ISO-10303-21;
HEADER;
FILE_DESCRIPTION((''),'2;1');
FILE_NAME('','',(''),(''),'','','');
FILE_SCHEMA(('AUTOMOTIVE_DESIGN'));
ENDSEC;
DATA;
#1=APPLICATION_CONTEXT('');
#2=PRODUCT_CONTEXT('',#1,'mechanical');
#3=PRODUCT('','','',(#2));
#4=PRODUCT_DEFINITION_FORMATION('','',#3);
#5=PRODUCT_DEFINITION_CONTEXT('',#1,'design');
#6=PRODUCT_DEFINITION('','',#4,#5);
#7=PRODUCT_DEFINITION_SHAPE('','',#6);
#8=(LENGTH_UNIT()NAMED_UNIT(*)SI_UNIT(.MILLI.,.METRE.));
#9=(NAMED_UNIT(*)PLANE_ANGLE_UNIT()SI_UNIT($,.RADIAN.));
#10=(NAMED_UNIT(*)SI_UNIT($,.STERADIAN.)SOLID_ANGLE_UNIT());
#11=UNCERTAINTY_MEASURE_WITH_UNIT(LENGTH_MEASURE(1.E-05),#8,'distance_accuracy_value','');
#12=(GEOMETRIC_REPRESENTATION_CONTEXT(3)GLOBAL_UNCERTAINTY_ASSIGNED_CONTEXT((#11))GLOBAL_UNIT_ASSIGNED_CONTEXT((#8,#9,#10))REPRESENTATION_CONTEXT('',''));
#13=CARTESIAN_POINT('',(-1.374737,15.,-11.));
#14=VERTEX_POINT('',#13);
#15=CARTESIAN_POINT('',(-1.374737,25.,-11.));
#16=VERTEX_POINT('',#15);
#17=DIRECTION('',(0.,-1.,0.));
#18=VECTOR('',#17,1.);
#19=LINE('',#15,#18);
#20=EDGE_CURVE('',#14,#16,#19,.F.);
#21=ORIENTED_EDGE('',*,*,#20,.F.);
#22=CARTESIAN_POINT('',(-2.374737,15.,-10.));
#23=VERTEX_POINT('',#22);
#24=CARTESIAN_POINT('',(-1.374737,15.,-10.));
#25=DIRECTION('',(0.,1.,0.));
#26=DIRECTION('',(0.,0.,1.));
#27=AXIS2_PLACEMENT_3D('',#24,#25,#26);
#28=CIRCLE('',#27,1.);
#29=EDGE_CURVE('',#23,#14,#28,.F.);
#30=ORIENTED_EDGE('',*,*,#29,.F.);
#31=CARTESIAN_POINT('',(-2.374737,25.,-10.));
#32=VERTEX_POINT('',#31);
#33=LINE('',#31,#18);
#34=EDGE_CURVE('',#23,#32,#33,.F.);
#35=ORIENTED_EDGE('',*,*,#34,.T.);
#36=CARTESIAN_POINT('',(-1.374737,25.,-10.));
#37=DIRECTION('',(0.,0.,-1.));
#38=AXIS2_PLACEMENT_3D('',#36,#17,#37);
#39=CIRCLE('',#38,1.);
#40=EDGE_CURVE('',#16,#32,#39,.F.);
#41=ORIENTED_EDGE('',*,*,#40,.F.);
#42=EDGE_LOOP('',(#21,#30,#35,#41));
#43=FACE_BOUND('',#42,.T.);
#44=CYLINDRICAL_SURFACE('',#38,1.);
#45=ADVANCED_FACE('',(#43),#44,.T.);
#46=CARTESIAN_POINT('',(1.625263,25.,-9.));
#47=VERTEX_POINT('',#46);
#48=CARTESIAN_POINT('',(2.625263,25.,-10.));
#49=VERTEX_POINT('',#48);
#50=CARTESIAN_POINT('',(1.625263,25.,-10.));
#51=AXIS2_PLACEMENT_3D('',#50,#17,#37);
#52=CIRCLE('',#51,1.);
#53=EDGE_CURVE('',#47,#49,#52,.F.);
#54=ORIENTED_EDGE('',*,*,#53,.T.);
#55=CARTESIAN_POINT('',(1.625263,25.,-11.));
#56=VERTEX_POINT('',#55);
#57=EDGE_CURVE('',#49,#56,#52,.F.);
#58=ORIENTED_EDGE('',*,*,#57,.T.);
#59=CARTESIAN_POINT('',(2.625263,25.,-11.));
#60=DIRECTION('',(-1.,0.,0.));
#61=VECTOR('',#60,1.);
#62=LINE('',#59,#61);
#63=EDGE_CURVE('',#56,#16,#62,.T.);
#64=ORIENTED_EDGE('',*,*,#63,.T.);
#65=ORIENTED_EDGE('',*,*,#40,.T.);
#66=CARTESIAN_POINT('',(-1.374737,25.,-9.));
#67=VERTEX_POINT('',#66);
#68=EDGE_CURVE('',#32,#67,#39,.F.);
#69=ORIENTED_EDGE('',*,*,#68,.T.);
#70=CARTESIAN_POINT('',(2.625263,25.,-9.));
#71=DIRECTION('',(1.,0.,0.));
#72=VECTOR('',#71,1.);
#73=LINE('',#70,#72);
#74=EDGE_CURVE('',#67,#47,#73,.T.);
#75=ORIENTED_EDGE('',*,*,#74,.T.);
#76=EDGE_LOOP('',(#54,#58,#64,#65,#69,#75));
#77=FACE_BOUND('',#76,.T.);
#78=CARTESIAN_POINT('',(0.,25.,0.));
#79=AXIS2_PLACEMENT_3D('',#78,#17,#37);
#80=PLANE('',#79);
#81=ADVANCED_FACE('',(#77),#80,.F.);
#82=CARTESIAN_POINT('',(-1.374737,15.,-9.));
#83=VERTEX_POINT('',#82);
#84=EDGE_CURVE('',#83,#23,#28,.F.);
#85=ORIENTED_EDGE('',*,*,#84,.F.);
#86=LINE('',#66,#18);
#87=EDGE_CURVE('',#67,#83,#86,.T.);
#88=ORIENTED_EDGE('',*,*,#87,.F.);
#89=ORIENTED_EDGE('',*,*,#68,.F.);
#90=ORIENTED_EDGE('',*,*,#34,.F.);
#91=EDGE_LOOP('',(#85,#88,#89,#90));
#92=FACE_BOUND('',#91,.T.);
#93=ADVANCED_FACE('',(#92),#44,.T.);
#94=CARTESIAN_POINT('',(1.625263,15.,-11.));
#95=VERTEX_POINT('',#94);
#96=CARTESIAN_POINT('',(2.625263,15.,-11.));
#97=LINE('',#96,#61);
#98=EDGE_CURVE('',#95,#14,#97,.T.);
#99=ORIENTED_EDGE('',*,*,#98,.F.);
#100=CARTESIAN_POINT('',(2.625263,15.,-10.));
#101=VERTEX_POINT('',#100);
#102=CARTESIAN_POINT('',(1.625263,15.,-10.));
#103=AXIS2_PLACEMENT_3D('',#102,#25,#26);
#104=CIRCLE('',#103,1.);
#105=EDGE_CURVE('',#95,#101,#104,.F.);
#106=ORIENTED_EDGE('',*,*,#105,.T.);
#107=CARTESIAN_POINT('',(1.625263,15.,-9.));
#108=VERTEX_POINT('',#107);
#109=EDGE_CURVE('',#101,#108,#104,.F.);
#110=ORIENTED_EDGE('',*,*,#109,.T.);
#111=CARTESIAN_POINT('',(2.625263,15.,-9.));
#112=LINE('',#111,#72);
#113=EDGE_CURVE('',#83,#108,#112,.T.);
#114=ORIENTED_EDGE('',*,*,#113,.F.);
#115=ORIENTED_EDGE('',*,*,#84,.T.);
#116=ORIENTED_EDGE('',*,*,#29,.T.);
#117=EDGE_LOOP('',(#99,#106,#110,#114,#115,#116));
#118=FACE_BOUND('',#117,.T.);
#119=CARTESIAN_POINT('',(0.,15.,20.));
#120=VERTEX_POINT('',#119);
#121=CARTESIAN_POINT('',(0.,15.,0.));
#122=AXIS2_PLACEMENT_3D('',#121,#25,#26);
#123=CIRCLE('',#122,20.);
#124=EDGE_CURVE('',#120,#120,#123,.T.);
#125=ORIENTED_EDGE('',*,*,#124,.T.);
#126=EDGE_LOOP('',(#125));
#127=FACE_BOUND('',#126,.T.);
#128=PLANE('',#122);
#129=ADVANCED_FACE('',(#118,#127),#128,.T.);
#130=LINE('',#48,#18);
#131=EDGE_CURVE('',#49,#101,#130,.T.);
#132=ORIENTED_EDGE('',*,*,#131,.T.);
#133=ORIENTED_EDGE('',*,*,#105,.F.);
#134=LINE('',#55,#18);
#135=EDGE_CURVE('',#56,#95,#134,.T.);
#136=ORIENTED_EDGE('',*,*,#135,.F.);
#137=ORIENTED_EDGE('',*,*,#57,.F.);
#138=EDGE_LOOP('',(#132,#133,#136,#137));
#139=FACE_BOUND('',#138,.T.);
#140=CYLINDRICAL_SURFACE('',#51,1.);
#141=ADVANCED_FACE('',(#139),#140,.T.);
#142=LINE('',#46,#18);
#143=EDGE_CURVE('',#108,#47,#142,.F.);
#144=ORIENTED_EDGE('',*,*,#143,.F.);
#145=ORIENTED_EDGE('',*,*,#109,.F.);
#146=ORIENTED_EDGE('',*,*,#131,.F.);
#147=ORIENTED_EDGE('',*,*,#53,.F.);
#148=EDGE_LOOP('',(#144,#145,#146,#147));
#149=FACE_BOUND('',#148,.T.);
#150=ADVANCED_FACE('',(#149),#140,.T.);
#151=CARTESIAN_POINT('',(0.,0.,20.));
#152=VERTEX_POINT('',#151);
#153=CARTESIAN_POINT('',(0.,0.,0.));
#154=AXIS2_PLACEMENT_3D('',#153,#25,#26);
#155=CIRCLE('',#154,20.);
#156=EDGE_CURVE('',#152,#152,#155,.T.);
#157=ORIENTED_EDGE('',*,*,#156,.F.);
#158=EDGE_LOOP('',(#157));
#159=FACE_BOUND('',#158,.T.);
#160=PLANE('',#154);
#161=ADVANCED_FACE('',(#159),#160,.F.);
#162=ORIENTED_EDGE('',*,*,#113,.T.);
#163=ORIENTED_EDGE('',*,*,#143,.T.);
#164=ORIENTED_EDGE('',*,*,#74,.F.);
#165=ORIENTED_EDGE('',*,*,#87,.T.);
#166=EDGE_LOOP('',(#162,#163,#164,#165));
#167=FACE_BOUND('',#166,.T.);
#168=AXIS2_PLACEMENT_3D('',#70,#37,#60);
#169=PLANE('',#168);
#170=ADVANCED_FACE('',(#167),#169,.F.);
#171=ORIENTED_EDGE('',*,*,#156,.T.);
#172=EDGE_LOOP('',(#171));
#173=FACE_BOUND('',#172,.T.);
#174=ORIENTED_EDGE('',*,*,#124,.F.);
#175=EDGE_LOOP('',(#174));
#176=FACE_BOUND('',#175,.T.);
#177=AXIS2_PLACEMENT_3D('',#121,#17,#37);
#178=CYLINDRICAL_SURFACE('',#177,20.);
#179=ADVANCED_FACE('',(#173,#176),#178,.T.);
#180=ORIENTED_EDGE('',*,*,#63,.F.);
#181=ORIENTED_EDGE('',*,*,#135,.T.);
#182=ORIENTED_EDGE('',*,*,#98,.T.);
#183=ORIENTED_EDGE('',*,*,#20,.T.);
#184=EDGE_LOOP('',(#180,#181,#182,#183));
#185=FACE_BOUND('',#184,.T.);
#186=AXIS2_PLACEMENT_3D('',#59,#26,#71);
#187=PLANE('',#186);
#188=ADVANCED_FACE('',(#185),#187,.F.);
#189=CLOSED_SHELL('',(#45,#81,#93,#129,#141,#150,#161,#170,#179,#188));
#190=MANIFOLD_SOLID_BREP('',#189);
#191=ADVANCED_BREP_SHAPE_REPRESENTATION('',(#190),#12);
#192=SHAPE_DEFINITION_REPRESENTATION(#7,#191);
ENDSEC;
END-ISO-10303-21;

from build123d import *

# Parameters (mm, degrees)
SKETCH1_R           = 20
BOSS_EXTRUDE1_DEPTH = 15
SKETCH2_W           = 5
SKETCH2_H           = 2
BOSS_EXTRUDE2_DEPTH = 10
FILLET1_R           = 1


with BuildPart() as part:
    # Sketch1 → Boss-Extrude1 (new body)
    with BuildSketch(Plane(origin=(0, 0, 0), x_dir=(1, 0, 0), z_dir=(0, 1, 0))):
        with Locations(Location((0, 0, 0), (0, 0, 270))):
            Circle(SKETCH1_R)
    extrude(amount=BOSS_EXTRUDE1_DEPTH)

    # Sketch2 → Boss-Extrude2 (add)
    with BuildSketch(Plane(origin=(0, 15, 0), x_dir=(1, 0, 0), z_dir=(0, 1, 0))):
        with Locations((0.125263177, 10)):
            Rectangle(SKETCH2_W, SKETCH2_H)
    extrude(amount=BOSS_EXTRUDE2_DEPTH)

    # Fillet1
    fillet1_edges = [part.edges().sort_by_distance(p)[0] for p in [
        (-2.374736823, 20, -11),
        (2.625263177, 20, -11),
        (-2.374736823, 20, -9),
        (2.625263177, 20, -9),
    ]]
    fillet(fillet1_edges, radius=FILLET1_R - 0.0001)  # a hair under: the kernel refuses the full size


solid = part.part
